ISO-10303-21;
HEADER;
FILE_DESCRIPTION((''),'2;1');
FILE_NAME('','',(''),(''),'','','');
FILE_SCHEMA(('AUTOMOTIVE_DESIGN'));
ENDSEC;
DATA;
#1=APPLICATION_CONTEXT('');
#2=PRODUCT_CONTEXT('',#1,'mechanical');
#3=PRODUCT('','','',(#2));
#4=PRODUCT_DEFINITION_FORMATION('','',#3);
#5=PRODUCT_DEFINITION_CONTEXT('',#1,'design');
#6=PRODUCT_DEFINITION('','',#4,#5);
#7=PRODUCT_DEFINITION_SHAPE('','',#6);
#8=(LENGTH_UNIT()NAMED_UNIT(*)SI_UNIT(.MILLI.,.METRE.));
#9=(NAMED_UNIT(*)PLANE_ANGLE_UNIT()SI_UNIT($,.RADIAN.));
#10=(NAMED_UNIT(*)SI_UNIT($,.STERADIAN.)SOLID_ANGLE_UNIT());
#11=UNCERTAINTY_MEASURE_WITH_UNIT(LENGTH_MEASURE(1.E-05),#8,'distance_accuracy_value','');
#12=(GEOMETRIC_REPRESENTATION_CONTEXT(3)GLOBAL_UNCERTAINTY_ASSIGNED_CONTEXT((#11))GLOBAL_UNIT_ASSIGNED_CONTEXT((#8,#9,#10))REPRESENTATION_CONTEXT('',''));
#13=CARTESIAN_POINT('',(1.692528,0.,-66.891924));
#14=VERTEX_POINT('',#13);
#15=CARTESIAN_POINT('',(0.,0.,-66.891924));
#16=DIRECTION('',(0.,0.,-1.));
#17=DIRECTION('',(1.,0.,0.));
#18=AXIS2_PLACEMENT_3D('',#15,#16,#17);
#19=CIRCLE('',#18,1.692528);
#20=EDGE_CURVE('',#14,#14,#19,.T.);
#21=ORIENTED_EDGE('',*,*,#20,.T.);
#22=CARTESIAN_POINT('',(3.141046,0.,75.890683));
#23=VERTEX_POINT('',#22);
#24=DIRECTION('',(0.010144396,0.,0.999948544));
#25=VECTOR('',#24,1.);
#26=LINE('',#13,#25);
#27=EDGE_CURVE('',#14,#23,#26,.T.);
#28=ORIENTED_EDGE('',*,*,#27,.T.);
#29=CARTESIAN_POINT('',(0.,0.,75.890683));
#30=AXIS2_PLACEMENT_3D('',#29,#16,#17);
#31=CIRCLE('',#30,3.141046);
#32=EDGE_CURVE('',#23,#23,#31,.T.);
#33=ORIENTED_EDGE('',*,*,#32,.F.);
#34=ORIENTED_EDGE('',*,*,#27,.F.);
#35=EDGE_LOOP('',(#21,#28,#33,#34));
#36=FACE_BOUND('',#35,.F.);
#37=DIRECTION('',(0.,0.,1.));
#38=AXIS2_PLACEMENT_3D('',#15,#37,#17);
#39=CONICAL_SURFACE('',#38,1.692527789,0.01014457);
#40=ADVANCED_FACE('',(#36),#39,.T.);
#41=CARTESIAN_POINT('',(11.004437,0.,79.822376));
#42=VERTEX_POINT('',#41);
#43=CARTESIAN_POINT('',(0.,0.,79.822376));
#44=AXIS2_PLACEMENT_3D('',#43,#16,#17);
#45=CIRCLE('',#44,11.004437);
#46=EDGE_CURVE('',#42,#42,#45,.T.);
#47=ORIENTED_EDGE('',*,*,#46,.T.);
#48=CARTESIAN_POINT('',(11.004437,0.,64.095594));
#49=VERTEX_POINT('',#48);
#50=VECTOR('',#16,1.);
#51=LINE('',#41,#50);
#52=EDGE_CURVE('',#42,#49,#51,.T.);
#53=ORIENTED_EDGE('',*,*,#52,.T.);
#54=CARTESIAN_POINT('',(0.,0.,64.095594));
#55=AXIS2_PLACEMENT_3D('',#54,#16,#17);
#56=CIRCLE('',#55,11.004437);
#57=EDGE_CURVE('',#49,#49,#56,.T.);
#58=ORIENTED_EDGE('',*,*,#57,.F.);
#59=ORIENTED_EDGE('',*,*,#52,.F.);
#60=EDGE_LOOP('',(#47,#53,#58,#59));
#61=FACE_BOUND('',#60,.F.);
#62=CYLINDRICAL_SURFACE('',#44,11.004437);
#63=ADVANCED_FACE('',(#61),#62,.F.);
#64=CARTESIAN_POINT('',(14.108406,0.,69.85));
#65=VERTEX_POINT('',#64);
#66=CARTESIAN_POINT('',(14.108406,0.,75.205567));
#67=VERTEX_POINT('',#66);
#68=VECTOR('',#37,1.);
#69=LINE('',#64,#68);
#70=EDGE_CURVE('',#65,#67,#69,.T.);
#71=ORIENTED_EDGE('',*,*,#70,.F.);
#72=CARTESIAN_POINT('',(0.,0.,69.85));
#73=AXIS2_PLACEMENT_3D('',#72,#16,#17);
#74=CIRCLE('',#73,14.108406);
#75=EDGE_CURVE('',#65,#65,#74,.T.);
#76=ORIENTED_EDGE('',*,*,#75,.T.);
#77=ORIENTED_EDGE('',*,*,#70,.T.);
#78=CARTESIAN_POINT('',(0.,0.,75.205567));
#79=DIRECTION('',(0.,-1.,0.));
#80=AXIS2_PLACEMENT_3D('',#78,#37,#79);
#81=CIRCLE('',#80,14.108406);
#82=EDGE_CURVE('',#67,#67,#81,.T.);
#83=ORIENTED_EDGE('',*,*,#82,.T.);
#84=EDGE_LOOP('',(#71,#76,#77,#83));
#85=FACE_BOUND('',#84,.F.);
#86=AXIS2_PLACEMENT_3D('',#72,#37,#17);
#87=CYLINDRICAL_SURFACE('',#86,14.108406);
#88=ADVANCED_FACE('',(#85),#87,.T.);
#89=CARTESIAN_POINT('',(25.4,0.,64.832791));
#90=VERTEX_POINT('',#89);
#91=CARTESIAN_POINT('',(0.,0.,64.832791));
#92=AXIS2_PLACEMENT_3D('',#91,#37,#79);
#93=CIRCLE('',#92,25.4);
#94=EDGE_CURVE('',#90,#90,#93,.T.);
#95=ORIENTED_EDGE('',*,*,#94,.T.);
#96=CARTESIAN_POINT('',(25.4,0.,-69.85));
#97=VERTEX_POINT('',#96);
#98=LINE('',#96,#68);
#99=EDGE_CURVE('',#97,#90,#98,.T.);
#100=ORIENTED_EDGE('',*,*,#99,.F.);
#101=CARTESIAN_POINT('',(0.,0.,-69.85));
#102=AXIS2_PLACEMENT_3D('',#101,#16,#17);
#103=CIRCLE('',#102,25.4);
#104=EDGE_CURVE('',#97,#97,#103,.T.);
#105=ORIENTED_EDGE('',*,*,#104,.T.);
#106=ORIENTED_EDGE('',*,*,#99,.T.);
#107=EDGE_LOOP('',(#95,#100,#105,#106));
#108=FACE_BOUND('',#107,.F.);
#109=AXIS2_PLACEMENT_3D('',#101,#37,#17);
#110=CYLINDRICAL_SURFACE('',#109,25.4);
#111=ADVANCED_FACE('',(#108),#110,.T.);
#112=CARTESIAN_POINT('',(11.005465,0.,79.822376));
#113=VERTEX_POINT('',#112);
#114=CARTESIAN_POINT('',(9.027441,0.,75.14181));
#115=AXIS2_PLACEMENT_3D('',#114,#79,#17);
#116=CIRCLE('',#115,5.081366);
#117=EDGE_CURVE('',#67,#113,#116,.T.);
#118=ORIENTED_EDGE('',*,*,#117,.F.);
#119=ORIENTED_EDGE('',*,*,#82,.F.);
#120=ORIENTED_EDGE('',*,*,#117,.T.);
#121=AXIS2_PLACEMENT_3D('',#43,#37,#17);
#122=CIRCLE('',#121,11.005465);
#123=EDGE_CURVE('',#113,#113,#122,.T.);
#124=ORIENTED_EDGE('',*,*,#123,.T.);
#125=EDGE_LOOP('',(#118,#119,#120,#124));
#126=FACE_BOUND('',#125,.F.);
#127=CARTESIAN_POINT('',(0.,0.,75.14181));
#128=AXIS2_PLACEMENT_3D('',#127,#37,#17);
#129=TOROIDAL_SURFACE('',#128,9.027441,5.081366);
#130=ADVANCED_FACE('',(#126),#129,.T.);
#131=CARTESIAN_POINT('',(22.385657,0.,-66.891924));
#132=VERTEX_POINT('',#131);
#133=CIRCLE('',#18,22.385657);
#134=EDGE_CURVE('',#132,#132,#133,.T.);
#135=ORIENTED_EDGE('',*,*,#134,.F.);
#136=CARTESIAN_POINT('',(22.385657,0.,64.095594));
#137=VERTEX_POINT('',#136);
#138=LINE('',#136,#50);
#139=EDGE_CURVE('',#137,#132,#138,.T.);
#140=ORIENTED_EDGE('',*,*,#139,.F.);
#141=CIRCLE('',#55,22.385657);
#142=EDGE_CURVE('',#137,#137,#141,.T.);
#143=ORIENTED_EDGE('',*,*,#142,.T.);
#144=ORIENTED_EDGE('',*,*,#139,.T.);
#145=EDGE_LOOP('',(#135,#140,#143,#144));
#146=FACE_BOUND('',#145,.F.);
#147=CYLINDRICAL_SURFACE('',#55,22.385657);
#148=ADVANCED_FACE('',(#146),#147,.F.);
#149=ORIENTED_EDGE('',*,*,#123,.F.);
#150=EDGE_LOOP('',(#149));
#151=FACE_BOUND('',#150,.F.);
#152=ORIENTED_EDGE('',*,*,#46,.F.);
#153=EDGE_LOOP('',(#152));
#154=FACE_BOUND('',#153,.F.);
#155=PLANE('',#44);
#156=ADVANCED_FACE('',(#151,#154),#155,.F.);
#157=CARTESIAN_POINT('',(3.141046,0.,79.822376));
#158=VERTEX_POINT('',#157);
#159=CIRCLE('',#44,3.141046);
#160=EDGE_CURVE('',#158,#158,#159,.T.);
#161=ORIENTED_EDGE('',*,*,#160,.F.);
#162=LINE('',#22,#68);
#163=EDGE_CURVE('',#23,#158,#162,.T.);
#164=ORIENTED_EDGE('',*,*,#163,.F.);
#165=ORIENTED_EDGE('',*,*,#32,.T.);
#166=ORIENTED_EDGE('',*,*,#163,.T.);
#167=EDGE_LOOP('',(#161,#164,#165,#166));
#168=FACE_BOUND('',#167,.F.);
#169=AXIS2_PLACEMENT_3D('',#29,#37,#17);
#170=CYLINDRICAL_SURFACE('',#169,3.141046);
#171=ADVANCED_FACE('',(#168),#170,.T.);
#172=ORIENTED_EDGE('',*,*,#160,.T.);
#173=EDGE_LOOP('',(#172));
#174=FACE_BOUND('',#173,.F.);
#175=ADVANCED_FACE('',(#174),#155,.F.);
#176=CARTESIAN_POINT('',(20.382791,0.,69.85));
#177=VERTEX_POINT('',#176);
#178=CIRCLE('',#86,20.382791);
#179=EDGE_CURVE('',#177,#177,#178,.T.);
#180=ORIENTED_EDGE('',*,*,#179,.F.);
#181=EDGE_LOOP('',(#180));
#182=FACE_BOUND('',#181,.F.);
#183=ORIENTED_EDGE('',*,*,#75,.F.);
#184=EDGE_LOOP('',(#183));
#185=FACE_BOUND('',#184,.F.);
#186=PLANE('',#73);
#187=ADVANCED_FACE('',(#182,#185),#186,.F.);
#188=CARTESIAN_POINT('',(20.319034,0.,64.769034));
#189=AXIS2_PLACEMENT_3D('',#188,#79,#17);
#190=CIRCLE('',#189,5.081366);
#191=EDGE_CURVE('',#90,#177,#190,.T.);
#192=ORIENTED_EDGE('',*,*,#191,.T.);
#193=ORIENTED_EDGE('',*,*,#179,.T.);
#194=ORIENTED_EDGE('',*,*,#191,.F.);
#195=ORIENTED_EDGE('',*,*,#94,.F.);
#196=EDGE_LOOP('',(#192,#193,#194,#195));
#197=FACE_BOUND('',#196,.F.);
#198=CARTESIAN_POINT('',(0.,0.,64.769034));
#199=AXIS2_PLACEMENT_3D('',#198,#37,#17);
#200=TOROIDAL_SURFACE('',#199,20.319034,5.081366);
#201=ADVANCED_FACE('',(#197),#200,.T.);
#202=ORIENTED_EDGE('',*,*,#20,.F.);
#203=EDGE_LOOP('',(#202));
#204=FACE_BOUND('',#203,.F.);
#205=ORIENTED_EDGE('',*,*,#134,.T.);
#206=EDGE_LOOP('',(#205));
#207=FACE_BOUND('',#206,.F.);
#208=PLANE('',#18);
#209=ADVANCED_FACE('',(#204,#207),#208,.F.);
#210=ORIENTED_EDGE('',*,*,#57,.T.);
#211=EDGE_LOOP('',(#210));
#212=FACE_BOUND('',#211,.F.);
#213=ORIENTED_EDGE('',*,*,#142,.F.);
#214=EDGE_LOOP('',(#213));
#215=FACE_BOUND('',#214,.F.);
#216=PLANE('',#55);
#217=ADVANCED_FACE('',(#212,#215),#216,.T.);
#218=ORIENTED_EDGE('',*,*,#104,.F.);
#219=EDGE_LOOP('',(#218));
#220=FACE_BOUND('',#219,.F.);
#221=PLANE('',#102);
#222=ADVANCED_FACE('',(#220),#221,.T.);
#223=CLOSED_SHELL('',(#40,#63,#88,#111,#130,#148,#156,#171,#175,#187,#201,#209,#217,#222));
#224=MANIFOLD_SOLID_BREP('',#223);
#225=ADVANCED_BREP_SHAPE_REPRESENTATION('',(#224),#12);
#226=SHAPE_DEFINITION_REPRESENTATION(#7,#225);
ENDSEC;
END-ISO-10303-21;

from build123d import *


# Not quite as in the source:
# - a fillet or chamfer that OpenCascade refuses, or shapes differently, is made with other operations: its cross-section is extruded or revolved along the edge and cut away or added


with BuildPart() as f1:
    # F0 (on Front) → F1 (revolve)
    with BuildSketch(Plane.XZ):
        Polygon((25.4, -69.85), (25.4, 69.85), (14.1084063798, 69.85), (14.1084063798, 79.8223763704), (11.0044367611, 79.8223763704), (11.0044367611, 75.8906826377), (11.0044367611, 64.0955939889), (22.3856568336, 64.0955939889), (22.3856568336, -66.8919235468), (1.6925277887, -66.8919235468), (3.1410455704, 75.8906826377), (3.1410455704, 79.8223763704), (0, 79.8223763704), (0, 0), (0, -69.85), align=None)
    revolve(axis=Axis((0, 0, 39.9111881852), (0, 0, -1)))

    # F2: fillet of radius 5.08 on 2 edges, made by hand

    # F2_s1 → F2_t2 (revolve, cut)
    with BuildSketch(Plane.XZ):
        with BuildLine():
            ThreePointArc((25.4004, 64.7690343146), (23.9121024484, 68.3621024484), (20.3190343146, 69.8504))
            Line((20.3190343146, 69.8504), (20.3190343146, 70.3585365685))
            ThreePointArc((20.3190343146, 70.3585365685), (22.8595171573, 70.3581365685), (25.4, 70.3581365685))
            Line((25.4, 70.3581365685), (25.9081365685, 69.85))
            ThreePointArc((25.9081365685, 69.85), (25.9081365685, 67.3095171573), (25.9085365685, 64.7690343146))
            Line((25.9085365685, 64.7690343146), (25.4004, 64.7690343146))
        make_face()
    revolve(axis=Axis((0, 0, 69.85), (0, 0, -1)), mode=Mode.SUBTRACT)

    # F2_s3 → F2_t4 (revolve, cut)
    with BuildSketch(Plane.XZ):
        with BuildLine():
            ThreePointArc((14.1088063798, 75.1418102884), (13.2622316021, 77.9501591266), (11.0045924005, 79.8227448489))
            Line((11.0045924005, 79.8227448489), (11.2023075712, 80.2908383049))
            ThreePointArc((11.2023075712, 80.2908383049), (12.5564993902, 80.330512939), (14.1084063798, 80.330512939))
            Line((14.1084063798, 80.330512939), (14.6165429484, 79.8223763704))
            ThreePointArc((14.6165429484, 79.8223763704), (14.6165429484, 77.4820933294), (14.6169429484, 75.1418102884))
            Line((14.6169429484, 75.1418102884), (14.1088063798, 75.1418102884))
        make_face()
    revolve(axis=Axis((0, 0, 79.8223763704), (0, 0, -1)), mode=Mode.SUBTRACT)


solid = f1.part
